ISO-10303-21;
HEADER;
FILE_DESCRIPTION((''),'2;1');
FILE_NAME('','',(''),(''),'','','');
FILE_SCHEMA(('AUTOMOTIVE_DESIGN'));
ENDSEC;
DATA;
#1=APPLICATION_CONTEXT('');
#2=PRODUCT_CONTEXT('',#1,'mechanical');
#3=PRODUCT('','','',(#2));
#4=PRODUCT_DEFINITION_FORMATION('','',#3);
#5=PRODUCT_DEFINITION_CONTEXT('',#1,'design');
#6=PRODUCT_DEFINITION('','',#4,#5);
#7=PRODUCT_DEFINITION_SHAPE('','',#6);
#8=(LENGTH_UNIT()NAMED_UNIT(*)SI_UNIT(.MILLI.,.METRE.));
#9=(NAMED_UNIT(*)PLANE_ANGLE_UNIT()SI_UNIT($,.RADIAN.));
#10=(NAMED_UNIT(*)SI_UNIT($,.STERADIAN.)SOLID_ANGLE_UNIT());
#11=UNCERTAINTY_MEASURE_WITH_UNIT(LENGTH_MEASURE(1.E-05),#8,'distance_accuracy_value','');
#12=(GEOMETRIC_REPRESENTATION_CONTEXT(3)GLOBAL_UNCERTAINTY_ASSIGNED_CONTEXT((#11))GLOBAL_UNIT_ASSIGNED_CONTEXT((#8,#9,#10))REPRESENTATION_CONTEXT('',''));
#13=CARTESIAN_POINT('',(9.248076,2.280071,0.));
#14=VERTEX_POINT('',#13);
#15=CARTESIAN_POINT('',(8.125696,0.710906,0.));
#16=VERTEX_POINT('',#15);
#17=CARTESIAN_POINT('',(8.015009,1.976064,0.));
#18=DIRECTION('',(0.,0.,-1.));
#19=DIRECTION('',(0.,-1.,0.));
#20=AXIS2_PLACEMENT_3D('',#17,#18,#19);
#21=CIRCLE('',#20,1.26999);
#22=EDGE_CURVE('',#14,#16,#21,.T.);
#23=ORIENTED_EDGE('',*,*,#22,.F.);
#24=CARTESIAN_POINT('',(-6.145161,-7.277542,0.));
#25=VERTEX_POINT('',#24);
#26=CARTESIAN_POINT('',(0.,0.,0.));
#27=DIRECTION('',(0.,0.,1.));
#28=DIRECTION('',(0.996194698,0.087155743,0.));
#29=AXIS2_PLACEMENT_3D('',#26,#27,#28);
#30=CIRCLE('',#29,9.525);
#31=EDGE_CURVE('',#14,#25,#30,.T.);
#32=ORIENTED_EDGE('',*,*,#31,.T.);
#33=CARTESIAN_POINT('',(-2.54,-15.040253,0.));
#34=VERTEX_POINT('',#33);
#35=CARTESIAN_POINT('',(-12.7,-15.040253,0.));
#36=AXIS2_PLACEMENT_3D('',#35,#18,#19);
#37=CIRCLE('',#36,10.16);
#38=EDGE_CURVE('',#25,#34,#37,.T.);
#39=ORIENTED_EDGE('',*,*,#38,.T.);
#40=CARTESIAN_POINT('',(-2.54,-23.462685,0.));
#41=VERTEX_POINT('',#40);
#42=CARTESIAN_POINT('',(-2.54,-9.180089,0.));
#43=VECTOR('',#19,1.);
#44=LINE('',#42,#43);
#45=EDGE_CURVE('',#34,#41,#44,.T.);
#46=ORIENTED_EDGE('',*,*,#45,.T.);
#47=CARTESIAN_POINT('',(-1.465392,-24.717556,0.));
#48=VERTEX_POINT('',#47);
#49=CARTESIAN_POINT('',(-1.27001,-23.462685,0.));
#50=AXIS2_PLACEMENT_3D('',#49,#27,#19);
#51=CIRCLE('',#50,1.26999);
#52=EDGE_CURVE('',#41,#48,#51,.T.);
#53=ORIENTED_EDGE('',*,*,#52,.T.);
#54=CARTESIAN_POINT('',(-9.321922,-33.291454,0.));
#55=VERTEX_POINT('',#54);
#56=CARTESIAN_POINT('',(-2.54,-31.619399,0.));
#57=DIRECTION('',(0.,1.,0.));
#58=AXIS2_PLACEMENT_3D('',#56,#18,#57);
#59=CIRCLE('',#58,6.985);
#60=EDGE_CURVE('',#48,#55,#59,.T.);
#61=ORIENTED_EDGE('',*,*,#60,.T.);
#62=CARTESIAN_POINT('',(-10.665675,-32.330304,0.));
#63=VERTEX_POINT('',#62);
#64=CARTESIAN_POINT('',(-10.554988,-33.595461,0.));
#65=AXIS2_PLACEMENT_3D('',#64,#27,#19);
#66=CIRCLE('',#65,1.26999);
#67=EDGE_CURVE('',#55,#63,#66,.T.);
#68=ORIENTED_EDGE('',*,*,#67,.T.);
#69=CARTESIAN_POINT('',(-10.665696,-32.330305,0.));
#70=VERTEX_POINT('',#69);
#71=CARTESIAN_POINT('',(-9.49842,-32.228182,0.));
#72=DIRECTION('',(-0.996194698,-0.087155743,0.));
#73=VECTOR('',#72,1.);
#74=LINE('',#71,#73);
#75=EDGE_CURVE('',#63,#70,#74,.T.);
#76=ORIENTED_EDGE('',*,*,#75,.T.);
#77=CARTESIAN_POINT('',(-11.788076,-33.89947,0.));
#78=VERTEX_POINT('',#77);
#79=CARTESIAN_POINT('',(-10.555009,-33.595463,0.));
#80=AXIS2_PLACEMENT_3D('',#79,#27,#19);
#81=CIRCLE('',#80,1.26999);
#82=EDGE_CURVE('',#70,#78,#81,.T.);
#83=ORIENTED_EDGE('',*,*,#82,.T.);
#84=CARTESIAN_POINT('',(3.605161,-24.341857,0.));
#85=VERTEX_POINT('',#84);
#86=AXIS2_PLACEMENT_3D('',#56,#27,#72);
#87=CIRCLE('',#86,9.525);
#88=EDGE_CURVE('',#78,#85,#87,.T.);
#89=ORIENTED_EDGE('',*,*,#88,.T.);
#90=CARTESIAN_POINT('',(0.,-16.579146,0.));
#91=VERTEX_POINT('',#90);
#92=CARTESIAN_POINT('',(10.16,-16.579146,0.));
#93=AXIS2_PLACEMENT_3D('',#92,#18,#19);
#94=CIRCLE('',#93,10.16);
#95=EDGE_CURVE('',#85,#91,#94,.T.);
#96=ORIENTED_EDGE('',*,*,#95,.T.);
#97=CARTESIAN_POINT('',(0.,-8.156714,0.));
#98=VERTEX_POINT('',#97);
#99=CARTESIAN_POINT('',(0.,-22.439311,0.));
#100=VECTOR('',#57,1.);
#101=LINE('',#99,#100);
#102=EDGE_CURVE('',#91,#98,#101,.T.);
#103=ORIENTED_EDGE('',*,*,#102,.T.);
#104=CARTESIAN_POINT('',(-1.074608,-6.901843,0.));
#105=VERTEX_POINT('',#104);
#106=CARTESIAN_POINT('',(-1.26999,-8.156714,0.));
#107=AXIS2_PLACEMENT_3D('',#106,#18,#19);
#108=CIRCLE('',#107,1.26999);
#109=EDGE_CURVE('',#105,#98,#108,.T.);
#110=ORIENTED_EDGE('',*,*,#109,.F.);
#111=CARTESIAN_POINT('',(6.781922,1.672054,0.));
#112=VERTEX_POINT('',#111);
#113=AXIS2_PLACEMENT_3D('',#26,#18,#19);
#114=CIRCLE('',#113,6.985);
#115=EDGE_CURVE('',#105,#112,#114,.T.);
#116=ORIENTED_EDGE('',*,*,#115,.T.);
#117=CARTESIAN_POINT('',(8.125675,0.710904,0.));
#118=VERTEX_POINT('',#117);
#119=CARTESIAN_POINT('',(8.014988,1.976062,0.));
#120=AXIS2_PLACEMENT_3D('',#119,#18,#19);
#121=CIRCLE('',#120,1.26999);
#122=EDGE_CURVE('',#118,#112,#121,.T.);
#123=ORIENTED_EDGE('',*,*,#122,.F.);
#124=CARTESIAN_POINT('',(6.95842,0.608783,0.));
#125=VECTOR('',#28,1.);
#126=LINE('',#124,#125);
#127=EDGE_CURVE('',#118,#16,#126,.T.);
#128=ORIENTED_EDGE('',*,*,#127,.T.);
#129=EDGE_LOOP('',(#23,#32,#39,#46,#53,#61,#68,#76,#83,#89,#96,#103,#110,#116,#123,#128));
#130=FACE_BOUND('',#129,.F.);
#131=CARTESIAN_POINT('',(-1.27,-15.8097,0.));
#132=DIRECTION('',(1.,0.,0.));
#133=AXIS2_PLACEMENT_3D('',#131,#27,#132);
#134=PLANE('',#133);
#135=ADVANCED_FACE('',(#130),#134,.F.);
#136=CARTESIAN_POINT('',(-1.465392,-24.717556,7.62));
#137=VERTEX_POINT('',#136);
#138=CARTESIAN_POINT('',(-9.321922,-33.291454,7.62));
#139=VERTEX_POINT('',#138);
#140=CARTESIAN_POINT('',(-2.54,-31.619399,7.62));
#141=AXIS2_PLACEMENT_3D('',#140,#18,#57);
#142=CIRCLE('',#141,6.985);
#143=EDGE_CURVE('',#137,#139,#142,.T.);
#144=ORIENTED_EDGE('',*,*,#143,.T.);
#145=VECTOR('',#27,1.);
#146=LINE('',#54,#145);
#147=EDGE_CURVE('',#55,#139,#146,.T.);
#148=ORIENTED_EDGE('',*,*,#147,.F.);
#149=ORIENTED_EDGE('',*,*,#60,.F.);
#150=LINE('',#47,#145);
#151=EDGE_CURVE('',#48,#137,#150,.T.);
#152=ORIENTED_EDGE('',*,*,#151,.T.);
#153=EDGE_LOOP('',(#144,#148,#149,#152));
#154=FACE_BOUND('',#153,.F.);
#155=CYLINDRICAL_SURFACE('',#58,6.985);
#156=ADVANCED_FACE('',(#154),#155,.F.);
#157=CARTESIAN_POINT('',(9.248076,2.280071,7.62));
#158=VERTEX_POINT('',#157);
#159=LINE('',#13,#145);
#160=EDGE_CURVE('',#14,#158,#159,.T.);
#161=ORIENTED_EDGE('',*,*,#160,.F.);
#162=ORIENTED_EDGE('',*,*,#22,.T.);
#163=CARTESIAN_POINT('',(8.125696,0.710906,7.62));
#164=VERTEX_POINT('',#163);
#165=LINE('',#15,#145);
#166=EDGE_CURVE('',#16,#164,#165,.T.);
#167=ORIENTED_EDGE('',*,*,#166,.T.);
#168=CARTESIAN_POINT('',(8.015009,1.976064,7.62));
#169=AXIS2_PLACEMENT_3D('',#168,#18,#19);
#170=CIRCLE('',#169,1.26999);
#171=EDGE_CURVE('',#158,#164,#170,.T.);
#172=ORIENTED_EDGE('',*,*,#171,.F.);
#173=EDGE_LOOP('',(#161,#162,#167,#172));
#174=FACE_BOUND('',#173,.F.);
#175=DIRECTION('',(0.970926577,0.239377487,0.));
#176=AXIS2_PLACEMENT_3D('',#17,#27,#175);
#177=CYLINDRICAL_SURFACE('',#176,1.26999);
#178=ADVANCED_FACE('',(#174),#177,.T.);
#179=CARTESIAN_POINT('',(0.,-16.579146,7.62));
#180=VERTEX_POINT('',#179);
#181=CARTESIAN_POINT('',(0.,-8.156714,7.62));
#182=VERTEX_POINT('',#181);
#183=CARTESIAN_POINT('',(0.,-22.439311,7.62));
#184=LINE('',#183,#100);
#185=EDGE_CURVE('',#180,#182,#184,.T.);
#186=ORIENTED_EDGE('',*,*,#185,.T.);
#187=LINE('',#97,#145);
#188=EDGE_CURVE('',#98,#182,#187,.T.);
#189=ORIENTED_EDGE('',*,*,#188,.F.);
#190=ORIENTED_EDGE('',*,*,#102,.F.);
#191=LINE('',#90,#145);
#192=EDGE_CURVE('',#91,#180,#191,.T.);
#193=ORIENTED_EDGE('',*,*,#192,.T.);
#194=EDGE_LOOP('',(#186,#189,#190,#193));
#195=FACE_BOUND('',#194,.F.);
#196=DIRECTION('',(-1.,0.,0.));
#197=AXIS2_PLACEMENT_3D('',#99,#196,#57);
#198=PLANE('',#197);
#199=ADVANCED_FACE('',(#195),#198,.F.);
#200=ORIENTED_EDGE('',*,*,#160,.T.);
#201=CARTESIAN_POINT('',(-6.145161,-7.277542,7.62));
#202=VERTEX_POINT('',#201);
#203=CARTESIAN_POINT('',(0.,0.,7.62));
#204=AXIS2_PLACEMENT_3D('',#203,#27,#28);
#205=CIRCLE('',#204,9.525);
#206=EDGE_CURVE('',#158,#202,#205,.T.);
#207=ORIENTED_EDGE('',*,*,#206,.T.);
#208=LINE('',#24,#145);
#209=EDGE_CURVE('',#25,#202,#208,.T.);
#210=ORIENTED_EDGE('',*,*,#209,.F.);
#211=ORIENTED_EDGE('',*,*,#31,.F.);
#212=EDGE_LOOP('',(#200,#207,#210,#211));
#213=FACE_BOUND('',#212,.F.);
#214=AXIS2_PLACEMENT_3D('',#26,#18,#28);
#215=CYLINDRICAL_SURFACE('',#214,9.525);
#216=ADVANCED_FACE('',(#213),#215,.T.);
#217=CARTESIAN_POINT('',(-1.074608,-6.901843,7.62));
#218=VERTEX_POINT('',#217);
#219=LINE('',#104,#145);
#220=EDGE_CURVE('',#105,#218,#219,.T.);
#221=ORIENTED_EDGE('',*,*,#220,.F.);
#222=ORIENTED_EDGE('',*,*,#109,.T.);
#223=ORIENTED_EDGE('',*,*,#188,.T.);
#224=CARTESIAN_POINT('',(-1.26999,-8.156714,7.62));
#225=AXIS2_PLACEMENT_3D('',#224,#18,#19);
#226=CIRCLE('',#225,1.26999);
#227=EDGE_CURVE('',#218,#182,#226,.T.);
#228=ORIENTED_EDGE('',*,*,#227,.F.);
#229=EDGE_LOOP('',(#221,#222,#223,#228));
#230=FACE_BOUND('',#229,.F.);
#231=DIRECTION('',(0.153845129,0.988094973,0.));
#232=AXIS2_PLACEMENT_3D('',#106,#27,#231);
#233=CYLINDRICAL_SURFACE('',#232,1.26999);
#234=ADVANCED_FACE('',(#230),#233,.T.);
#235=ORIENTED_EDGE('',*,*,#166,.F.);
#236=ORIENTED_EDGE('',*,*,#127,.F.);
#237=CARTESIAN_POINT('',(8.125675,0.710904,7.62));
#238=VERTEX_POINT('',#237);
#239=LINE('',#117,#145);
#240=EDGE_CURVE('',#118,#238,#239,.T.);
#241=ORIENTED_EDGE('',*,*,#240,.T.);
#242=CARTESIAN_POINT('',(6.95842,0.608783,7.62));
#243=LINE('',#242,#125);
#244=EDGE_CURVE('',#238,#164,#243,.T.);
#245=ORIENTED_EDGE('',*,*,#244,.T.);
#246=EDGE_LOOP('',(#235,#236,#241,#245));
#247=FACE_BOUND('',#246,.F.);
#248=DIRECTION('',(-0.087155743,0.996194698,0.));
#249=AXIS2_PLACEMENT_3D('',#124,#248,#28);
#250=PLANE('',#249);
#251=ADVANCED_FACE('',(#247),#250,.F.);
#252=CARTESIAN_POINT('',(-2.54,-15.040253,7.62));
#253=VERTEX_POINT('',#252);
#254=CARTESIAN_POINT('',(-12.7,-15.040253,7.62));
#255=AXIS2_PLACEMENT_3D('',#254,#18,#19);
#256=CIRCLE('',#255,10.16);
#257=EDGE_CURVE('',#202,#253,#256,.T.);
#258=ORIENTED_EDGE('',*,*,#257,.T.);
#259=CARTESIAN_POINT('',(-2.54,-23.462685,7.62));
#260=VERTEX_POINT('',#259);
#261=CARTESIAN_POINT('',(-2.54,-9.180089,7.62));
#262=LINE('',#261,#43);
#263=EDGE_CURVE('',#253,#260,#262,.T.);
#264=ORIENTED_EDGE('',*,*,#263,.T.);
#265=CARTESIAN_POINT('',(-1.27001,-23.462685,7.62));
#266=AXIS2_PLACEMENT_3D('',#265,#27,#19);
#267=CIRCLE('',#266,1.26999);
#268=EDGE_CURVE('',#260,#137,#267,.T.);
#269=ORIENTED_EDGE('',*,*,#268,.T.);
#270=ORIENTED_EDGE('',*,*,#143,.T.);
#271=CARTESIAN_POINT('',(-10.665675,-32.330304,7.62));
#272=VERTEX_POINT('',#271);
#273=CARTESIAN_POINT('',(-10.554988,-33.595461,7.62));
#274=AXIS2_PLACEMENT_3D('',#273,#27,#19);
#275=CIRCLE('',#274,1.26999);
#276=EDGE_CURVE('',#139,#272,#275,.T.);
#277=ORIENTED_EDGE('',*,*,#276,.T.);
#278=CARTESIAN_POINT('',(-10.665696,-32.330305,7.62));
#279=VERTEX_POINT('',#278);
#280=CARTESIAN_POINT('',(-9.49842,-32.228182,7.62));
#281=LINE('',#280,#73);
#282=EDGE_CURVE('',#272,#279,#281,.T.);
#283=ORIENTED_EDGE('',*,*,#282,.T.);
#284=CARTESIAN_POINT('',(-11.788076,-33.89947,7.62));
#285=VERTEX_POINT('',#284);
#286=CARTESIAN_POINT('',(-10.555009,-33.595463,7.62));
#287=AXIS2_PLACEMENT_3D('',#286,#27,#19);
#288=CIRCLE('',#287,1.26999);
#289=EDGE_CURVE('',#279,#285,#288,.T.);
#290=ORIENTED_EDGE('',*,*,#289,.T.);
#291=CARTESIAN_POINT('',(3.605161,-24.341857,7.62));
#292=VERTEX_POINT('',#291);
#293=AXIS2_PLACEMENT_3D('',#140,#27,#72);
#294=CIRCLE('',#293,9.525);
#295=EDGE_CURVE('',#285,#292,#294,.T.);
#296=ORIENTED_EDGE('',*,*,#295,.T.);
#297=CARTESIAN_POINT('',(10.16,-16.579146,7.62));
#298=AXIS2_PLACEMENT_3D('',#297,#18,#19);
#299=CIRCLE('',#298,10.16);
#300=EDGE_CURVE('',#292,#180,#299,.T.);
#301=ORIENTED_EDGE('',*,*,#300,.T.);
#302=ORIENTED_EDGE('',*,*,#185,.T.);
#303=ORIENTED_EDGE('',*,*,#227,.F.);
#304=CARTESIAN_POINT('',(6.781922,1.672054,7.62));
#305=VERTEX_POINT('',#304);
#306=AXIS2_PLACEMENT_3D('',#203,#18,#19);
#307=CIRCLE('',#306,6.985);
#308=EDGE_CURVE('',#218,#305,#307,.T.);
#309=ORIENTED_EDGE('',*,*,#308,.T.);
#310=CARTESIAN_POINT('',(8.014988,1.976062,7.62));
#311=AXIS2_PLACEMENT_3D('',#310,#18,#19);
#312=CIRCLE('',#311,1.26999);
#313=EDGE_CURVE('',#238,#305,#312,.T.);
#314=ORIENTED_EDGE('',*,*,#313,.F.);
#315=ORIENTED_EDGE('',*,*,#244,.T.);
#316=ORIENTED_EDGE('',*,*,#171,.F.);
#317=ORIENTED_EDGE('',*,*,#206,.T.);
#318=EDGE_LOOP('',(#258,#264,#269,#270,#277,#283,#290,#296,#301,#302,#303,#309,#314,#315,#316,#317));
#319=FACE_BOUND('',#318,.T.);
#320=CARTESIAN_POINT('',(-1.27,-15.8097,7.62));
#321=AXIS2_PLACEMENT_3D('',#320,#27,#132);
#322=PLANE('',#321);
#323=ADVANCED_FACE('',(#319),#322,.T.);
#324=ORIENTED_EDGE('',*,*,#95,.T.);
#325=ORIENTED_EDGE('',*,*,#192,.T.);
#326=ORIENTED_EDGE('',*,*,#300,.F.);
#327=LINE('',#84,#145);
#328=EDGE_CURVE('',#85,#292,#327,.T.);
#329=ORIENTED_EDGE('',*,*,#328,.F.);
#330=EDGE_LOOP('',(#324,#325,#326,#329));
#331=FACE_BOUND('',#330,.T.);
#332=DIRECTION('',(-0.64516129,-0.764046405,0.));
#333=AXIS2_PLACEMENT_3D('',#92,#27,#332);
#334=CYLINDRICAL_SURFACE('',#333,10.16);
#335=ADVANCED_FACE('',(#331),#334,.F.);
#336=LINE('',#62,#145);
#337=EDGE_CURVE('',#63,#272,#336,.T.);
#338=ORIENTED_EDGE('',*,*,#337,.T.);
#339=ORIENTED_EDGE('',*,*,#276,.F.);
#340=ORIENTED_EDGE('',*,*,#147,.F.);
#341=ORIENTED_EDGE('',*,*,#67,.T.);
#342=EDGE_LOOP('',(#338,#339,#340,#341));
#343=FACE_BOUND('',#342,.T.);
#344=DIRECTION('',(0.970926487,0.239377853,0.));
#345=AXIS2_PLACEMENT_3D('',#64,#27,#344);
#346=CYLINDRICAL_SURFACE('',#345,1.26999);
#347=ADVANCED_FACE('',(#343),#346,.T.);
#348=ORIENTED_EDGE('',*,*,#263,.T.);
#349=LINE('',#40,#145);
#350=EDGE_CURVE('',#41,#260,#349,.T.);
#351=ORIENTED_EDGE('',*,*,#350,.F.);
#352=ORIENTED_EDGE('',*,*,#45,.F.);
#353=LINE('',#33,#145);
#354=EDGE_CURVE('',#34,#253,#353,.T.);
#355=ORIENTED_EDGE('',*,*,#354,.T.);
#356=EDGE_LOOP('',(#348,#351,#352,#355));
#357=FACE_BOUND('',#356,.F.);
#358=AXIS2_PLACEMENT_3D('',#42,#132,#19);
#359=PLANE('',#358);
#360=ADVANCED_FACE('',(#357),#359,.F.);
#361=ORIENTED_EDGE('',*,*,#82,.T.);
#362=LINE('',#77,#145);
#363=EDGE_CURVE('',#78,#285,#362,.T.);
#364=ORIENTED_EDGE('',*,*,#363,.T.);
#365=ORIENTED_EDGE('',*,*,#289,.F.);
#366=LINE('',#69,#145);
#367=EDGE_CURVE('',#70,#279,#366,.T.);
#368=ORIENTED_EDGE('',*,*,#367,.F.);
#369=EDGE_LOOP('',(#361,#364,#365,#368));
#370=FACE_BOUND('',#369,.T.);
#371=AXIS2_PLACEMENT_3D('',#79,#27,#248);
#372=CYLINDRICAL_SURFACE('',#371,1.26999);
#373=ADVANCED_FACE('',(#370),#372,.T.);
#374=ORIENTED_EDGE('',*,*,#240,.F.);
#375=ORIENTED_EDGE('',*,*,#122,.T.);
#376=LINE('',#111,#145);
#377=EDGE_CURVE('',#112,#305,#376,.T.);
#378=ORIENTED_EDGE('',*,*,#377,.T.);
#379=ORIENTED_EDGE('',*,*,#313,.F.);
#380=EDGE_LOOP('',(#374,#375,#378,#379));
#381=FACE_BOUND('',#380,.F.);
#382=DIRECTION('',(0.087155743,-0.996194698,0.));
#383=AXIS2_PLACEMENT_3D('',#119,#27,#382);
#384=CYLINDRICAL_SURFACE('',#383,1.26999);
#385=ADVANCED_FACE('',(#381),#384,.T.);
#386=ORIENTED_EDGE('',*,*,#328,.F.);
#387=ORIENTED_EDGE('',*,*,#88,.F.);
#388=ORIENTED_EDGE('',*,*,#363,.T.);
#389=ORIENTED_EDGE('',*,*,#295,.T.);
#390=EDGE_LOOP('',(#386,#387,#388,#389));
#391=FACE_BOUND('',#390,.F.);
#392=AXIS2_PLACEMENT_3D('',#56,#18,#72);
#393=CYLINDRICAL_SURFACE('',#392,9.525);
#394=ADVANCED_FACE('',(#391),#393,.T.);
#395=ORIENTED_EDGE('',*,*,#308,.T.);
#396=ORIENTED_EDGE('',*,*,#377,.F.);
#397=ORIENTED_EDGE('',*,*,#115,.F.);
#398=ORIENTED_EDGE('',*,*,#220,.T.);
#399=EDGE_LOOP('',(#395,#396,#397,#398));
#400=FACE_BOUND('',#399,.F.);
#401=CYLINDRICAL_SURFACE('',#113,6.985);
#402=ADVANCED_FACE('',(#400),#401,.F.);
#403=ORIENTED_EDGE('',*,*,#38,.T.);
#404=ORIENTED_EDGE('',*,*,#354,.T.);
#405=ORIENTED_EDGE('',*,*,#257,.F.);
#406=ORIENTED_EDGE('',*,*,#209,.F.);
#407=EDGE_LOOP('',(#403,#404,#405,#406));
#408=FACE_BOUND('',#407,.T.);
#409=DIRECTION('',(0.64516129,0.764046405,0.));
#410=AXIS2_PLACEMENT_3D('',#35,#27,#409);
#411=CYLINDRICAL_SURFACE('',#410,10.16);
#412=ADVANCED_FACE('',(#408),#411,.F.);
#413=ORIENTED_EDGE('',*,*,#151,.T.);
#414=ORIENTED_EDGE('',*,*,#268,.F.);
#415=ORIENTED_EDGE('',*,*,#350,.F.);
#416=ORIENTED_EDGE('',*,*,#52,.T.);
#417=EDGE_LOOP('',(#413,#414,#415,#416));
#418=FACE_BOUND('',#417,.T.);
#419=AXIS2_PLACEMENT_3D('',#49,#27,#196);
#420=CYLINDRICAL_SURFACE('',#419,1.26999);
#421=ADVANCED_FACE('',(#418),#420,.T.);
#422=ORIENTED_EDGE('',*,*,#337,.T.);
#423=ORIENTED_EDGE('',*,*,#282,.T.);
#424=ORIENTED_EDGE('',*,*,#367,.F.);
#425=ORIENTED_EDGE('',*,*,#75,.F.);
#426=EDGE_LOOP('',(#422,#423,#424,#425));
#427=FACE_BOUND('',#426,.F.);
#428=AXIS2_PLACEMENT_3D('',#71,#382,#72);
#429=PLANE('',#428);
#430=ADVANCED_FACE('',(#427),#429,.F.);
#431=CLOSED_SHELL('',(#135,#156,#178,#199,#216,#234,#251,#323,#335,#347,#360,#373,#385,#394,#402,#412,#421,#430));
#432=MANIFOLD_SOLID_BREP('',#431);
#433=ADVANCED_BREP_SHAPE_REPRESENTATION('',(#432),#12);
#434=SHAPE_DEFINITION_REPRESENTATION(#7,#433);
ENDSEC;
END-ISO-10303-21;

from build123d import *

# Parameters (mm, degrees)
F1_DEPTH = 7.62
F2_R     = 10.16
F3_R     = 1.26999


# Not quite as in the source:
# - a fillet or chamfer is up to 0.001 mm smaller than in the source, because OpenCascade refuses the exact size


with BuildPart() as f1:
    # F0 (on Top) → F1 (new body)
    with BuildSketch(Plane.XY):
        with BuildLine():
            ThreePointArc((0, -6.985), (-5.1498821976, 4.7189976002), (6.9584199662, 0.6087828631))
            Line((6.9584199662, 0.6087828631), (9.4887544993, 0.8301584497))
            ThreePointArc((9.4887544993, 0.8301584497), (-6.0928284325, 7.3214115232), (-2.54, -9.1800885072))
            Line((-2.54, -9.1800885072), (-2.54, -22.0943992214))
            Line((-2.54, -22.0943992214), (-2.54, -24.6343992214))
            ThreePointArc((-2.54, -24.6343992214), (2.6098821976, -36.3383968216), (-9.4984199662, -32.2281820845))
            Line((-9.4984199662, -32.2281820845), (-12.0287544993, -32.4495576711))
            ThreePointArc((-12.0287544993, -32.4495576711), (3.5528284325, -38.9408107447), (0, -22.4393107142))
            Line((0, -22.4393107142), (0, -9.525))
            Line((0, -9.525), (0, -6.985))
        make_face()
    extrude(amount=F1_DEPTH)

    # F2
    f2_edges = [f1.edges().sort_by_distance(p)[0] for p in [
        (-2.54, -9.180089, 3.81),
        (0, -22.439311, 3.81),
    ]]
    fillet(f2_edges, radius=F2_R)

    # F3 (radius 1.27 in the source; OpenCascade refuses exactly that, so slightly less here)
    f3_edges = [f1.edges().sort_by_distance(p)[0] for p in [
        (6.95842, 0.608783, 3.81),
        (9.488754, 0.830158, 3.81),
        (-12.028754, -32.449558, 3.81),
        (-9.49842, -32.228182, 3.81),
        (-2.54, -24.634399, 3.81),
        (0, -6.985, 3.81),
    ]]
    fillet(f3_edges, radius=F3_R)


solid = f1.part
